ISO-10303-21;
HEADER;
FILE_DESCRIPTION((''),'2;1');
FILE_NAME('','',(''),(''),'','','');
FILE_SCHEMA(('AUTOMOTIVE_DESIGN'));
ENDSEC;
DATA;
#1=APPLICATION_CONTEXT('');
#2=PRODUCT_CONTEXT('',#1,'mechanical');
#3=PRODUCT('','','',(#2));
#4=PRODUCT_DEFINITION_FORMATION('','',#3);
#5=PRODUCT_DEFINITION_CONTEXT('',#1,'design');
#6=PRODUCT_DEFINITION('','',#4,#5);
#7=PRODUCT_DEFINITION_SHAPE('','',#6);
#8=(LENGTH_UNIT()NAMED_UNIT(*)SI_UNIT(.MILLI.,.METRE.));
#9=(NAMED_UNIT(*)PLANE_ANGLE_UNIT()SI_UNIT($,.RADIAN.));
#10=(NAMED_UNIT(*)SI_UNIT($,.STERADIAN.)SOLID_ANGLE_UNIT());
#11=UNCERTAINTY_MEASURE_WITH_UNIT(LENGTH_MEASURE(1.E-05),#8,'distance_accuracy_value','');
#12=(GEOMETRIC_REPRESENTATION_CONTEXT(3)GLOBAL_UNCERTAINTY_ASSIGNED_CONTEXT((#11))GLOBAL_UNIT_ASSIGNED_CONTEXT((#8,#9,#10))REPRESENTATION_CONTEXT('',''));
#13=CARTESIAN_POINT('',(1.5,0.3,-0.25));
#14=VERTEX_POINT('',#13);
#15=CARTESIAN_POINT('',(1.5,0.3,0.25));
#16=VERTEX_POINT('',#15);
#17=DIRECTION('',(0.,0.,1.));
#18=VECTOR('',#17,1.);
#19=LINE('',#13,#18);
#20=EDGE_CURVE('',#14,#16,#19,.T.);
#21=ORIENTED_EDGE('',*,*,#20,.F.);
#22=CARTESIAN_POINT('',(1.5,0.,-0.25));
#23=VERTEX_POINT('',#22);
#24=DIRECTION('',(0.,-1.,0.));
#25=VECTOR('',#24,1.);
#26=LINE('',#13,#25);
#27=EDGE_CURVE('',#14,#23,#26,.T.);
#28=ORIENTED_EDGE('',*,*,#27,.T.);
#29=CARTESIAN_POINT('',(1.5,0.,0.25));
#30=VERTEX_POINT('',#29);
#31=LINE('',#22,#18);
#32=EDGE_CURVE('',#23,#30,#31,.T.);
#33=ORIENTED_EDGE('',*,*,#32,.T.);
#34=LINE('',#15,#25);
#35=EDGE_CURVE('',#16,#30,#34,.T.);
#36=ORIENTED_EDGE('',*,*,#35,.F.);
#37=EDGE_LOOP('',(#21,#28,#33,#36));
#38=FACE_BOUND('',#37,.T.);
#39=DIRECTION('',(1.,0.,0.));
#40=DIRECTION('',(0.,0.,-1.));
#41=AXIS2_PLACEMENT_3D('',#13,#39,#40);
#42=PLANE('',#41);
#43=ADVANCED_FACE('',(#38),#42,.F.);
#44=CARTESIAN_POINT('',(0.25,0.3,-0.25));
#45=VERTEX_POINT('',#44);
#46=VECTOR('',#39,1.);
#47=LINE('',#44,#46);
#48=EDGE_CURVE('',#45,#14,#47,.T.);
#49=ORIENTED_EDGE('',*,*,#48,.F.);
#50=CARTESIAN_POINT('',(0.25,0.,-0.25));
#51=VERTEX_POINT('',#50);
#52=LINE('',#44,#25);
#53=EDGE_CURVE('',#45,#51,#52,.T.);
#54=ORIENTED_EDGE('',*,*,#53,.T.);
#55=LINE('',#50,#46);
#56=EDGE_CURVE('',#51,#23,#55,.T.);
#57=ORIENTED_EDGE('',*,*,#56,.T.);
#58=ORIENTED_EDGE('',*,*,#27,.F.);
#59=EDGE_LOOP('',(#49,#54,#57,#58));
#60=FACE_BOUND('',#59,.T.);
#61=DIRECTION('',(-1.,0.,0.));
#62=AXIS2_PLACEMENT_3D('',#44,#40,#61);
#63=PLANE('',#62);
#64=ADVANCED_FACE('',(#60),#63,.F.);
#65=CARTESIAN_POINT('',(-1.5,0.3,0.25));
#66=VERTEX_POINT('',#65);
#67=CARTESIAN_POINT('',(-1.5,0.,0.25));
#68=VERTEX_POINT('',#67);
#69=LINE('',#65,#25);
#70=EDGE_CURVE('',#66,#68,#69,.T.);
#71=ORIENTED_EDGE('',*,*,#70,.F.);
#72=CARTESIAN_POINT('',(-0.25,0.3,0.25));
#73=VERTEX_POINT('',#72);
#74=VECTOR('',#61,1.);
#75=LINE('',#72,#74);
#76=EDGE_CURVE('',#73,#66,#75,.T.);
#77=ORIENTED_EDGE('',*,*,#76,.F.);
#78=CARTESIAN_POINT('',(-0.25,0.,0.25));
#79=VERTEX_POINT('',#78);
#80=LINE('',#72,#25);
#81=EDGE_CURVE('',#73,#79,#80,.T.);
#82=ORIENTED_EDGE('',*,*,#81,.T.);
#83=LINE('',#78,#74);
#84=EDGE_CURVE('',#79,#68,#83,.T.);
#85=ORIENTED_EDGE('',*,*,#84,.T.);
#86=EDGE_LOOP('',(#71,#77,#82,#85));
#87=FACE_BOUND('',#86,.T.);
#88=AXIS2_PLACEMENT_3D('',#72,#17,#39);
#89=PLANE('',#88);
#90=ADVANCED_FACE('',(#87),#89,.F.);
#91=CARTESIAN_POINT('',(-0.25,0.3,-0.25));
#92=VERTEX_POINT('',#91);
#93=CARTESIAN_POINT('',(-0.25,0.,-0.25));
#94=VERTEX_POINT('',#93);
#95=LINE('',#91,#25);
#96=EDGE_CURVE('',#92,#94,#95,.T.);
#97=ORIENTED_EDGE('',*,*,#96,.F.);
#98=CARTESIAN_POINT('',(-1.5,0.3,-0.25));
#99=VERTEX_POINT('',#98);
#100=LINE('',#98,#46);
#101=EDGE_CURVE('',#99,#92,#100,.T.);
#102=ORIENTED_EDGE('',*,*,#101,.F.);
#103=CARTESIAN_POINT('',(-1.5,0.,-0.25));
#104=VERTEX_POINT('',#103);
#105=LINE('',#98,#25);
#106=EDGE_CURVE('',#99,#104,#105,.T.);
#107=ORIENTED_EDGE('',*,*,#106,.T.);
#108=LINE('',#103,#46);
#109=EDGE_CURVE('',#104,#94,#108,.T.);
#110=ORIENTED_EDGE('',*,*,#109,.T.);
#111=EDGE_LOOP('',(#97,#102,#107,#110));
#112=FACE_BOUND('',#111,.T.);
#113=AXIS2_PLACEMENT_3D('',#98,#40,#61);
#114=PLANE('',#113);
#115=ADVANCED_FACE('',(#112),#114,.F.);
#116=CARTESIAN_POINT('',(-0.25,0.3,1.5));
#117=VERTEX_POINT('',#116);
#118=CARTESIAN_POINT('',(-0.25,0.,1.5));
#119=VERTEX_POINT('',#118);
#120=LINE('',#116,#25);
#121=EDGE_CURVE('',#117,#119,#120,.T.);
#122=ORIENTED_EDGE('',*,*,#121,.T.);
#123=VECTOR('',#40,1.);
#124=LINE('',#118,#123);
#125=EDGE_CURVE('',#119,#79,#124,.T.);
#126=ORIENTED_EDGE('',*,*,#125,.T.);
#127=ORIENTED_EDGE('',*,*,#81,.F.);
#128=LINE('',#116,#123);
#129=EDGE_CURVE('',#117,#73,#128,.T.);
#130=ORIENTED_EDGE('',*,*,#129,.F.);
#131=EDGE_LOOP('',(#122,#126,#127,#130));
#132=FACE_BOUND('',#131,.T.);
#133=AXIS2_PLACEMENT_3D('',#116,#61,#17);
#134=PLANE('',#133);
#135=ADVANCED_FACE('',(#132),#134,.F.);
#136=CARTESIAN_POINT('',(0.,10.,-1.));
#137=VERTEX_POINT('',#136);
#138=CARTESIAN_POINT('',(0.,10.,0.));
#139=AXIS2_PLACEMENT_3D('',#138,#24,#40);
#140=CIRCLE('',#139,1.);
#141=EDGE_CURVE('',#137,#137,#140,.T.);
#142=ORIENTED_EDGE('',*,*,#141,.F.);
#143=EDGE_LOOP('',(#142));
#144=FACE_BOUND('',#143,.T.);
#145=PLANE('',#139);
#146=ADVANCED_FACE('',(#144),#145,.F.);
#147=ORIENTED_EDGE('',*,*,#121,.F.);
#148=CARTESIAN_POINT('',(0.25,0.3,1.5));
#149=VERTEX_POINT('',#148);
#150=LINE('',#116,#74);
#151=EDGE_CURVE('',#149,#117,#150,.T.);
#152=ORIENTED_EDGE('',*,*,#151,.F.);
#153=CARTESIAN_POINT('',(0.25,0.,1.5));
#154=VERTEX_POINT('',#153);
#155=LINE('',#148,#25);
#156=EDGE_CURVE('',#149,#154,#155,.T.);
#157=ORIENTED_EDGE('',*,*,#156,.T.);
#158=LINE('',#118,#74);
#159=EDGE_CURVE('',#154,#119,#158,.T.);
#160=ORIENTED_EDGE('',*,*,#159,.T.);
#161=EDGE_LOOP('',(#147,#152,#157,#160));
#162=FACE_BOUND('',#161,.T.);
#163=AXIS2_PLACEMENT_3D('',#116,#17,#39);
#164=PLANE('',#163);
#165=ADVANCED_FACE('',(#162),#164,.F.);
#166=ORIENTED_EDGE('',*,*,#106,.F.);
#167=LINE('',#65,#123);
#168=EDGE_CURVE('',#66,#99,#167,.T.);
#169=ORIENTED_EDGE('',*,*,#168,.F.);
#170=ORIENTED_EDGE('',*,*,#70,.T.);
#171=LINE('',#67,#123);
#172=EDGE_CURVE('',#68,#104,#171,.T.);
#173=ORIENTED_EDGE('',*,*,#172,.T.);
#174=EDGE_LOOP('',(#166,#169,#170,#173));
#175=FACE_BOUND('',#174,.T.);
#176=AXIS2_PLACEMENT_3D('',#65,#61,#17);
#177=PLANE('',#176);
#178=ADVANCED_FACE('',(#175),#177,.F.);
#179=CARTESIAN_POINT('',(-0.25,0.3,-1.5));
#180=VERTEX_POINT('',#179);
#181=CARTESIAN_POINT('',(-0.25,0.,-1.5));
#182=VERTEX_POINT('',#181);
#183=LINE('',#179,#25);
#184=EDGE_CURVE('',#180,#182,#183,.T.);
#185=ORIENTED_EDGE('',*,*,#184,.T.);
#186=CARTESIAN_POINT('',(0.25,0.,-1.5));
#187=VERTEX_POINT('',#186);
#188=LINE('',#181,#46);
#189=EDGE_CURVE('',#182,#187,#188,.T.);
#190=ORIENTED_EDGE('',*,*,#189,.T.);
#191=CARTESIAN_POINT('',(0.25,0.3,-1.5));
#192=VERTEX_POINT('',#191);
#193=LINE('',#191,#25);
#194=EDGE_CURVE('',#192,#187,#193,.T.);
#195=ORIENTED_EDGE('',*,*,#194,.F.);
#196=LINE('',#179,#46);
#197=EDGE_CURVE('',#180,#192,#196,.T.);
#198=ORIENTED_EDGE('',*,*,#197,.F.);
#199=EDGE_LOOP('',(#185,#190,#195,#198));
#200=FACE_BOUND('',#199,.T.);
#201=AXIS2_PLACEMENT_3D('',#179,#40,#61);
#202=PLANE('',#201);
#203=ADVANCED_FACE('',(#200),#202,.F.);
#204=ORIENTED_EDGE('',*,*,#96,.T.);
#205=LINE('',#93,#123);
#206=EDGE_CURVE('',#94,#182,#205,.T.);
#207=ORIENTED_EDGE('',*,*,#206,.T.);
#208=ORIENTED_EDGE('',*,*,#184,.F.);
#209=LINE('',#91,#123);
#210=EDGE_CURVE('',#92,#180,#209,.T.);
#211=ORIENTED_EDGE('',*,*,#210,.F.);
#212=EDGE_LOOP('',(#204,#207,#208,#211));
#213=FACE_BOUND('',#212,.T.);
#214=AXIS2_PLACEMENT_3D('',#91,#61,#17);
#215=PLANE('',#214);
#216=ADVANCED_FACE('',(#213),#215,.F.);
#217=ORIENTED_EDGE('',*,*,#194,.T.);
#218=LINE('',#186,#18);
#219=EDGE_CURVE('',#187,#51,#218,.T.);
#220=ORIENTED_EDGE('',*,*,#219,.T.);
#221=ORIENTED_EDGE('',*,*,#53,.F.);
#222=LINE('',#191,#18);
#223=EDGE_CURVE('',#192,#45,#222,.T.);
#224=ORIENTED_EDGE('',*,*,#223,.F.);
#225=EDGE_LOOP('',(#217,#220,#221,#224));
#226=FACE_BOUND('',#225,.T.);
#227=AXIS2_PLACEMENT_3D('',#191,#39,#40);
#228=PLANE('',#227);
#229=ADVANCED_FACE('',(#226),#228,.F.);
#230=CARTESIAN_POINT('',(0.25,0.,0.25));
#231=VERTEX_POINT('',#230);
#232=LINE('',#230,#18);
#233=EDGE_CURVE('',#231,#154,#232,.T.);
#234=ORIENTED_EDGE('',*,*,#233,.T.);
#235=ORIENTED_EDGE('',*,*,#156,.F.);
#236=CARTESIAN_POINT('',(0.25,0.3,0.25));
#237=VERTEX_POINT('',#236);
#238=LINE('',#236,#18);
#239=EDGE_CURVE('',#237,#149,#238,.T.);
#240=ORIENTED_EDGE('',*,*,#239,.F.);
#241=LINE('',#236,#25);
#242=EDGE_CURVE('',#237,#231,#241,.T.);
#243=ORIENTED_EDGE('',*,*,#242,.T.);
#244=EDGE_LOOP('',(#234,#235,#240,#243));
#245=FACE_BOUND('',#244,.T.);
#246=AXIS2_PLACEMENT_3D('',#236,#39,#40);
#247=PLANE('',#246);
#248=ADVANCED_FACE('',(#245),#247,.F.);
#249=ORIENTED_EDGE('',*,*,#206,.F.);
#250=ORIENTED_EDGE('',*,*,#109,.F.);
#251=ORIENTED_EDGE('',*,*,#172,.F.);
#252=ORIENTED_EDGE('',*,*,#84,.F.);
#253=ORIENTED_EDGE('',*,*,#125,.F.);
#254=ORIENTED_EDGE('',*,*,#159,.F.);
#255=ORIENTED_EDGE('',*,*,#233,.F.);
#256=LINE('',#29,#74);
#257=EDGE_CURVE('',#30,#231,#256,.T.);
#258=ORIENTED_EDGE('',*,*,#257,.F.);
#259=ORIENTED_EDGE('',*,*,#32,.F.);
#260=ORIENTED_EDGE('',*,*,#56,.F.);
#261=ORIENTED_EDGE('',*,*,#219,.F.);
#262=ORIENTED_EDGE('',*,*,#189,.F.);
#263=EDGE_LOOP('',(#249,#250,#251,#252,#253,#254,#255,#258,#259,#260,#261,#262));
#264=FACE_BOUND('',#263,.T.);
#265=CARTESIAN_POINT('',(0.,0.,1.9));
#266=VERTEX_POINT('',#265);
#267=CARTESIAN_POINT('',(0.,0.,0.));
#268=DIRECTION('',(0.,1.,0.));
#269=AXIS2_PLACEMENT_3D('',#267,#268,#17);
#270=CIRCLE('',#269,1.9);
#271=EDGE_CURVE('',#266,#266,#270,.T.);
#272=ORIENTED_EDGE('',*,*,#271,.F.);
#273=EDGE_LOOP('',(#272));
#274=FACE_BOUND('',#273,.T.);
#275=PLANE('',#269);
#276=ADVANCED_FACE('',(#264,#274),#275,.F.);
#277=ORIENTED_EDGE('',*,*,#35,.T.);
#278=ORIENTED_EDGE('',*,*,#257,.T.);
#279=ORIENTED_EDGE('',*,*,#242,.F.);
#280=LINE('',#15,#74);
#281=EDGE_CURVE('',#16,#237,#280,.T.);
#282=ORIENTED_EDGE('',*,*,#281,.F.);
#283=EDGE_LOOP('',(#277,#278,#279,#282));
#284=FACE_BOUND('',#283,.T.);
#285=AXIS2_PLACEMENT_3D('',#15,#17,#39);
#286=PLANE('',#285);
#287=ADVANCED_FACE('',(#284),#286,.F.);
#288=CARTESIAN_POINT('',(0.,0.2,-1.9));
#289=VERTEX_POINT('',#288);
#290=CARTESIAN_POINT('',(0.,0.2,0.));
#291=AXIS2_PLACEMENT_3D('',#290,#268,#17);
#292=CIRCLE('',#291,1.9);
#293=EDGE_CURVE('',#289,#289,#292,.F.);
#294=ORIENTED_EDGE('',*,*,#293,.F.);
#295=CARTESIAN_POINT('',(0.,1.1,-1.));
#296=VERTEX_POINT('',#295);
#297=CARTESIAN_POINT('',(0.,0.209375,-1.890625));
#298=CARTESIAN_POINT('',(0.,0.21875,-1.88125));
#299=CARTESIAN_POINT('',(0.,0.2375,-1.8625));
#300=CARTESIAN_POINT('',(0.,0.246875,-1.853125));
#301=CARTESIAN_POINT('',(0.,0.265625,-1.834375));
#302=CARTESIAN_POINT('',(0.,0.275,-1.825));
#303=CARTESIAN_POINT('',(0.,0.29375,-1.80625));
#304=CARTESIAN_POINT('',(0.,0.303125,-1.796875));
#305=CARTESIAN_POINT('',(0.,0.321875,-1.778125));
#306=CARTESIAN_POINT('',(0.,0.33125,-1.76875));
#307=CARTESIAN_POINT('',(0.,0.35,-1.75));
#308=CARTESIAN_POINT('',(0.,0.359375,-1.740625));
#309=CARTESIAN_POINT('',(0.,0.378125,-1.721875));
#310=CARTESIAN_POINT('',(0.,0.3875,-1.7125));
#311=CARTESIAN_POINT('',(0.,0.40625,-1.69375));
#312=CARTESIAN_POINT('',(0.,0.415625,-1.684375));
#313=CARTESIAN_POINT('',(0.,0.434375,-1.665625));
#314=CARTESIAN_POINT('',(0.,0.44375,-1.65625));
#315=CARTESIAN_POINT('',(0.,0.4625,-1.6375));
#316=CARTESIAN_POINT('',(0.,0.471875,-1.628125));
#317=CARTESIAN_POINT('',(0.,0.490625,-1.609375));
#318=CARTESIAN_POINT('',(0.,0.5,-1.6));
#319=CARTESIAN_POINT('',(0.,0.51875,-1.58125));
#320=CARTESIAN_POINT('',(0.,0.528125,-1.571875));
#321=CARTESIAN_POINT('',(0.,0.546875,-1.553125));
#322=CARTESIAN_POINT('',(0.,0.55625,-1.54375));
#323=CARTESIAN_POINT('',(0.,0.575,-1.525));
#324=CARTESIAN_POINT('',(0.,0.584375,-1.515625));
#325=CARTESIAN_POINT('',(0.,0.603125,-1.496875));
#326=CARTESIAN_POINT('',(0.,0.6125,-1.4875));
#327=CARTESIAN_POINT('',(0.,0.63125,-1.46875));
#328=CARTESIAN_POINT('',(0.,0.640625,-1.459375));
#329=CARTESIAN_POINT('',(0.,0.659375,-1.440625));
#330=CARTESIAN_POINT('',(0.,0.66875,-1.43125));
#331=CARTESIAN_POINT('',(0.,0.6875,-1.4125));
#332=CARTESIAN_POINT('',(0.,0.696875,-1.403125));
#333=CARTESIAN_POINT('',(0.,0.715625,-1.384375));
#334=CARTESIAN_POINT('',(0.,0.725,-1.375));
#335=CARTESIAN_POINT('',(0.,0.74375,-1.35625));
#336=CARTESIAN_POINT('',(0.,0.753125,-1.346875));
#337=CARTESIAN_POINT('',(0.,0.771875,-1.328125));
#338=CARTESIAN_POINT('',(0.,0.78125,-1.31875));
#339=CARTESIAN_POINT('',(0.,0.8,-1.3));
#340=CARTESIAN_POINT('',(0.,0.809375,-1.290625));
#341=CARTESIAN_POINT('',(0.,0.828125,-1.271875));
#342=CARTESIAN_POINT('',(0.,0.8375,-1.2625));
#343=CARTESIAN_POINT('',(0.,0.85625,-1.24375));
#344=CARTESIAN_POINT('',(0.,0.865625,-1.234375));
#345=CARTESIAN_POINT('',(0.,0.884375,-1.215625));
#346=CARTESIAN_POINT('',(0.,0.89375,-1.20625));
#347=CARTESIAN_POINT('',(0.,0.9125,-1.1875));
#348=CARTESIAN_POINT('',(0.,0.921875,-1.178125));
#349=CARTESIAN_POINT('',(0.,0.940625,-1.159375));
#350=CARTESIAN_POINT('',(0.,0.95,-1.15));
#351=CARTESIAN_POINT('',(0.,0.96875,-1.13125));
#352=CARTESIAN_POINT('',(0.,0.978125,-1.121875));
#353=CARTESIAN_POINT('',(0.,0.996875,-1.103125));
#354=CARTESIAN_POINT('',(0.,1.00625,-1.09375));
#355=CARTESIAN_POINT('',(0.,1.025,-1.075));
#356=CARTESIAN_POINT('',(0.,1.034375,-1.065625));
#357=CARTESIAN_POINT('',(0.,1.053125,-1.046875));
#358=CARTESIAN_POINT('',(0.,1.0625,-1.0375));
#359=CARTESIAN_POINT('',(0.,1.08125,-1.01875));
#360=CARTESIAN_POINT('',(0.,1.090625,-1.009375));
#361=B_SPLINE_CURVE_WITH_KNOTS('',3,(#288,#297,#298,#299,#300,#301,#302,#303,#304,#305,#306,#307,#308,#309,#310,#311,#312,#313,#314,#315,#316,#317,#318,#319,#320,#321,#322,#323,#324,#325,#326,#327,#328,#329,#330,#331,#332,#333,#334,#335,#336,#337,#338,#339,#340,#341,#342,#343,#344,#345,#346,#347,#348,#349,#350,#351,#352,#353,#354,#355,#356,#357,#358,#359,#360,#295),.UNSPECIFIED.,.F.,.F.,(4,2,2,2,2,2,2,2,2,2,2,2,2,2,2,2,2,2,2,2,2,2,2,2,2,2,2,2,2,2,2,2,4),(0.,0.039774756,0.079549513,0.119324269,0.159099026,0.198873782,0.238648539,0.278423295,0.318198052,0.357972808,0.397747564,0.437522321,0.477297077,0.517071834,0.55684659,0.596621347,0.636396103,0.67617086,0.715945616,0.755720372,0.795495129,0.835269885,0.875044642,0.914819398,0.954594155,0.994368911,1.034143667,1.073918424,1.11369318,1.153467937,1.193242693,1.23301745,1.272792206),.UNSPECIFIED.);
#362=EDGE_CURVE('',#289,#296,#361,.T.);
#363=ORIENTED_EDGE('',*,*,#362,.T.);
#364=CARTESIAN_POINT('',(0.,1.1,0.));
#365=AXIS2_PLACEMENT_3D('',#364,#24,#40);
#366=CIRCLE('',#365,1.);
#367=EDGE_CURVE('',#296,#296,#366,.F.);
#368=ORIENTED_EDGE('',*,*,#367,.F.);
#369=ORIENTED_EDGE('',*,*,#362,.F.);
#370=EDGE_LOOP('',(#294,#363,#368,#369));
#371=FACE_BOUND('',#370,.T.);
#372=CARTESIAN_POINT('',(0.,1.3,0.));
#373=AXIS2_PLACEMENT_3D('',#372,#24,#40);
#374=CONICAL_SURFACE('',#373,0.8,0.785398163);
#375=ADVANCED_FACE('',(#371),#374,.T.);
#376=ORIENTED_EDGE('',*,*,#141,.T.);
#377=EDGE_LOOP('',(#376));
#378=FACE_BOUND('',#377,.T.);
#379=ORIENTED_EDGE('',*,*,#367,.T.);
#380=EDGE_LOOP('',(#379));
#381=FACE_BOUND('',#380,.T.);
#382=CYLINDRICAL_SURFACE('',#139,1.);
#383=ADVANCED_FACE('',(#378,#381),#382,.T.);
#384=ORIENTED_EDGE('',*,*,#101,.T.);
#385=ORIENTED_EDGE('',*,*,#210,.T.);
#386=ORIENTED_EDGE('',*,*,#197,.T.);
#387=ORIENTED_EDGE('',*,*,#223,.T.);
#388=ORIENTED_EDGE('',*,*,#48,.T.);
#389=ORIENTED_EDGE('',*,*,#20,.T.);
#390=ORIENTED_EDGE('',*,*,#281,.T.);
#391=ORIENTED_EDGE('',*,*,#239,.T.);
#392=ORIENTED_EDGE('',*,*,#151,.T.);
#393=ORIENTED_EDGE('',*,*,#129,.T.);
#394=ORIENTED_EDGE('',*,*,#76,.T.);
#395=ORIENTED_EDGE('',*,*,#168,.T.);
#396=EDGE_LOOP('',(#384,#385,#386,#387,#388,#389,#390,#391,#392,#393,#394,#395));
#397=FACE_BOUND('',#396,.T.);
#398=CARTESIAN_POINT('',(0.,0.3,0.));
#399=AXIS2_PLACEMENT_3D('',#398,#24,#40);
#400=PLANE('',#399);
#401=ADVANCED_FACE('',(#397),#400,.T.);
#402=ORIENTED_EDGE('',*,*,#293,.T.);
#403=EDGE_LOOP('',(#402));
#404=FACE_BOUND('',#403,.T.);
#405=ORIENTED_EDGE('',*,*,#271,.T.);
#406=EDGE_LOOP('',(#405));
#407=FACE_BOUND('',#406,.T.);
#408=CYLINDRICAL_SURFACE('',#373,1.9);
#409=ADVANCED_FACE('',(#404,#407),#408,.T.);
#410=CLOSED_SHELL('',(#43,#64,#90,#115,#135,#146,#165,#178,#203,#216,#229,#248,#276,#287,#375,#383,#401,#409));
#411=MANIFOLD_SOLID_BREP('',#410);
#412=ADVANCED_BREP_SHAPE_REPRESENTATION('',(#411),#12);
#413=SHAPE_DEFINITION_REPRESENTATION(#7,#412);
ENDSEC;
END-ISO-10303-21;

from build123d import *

# Parameters (mm, degrees)
SKETCH1_R           = 1.9
BOSS_EXTRUDE1_DEPTH = 1.3
SKETCH2_R           = 1
BOSS_EXTRUDE2_DEPTH = 10
CHAMFER1_SIZE       = 1.1
CUT_EXTRUDE1_DEPTH  = 0.3


with BuildPart() as part:
    # Sketch1 → Boss-Extrude1 (new body)
    with BuildSketch(Plane(origin=(0, 0, 0), x_dir=(1, 0, 0), z_dir=(0, 1, 0))):
        with Locations(Location((0, 0, 0), (0, 0, 270))):
            Circle(SKETCH1_R)
    extrude(amount=BOSS_EXTRUDE1_DEPTH)

    # Sketch2 → Boss-Extrude2 (add)
    with BuildSketch(Plane.XZ):
        with Locations(Location((0, 0, 0), (0, 0, 270))):
            Circle(SKETCH2_R)
    extrude(amount=-BOSS_EXTRUDE2_DEPTH)

    # Chamfer1
    # the kernel refuses this chamfer: 1.1 mm, written as the material it takes off along each edge
    with BuildSketch(Plane(origin=(0, 1.3, 0), x_dir=(0, 0, 1), z_dir=(-1, 0, 0))) as chamfer1_piece_1_section:
        Polygon((1.9, -CHAMFER1_SIZE), (1.9 - CHAMFER1_SIZE, 0), (1.9, 0), align=None)
    chamfer1_piece_1 = revolve(axis=Axis((0, 1.3, 0), (0, 1, 0)), mode=Mode.PRIVATE)
    chamfer1_piece_1 = chamfer1_piece_1 - Plane(origin=(0, 0.647474875, 0), x_dir=(0, 0, -1), z_dir=(0, -1, 0)) * Cylinder(1, 8, mode=Mode.PRIVATE)
    add(chamfer1_piece_1, mode=Mode.SUBTRACT)

    # Sketch3 → Cut-Extrude1 (cut)
    with BuildSketch(Plane.XZ):
        Polygon((-0.25, 1.5), (-0.25, 0.25), (-1.5, 0.25), (-1.5, -0.25), (-0.25, -0.25), (-0.25, -1.5), (0.25, -1.5), (0.25, -0.25), (1.5, -0.25), (1.5, 0.25), (0.25, 0.25), (0.25, 1.5), align=None)
    extrude(amount=-CUT_EXTRUDE1_DEPTH, mode=Mode.SUBTRACT)


solid = part.part
